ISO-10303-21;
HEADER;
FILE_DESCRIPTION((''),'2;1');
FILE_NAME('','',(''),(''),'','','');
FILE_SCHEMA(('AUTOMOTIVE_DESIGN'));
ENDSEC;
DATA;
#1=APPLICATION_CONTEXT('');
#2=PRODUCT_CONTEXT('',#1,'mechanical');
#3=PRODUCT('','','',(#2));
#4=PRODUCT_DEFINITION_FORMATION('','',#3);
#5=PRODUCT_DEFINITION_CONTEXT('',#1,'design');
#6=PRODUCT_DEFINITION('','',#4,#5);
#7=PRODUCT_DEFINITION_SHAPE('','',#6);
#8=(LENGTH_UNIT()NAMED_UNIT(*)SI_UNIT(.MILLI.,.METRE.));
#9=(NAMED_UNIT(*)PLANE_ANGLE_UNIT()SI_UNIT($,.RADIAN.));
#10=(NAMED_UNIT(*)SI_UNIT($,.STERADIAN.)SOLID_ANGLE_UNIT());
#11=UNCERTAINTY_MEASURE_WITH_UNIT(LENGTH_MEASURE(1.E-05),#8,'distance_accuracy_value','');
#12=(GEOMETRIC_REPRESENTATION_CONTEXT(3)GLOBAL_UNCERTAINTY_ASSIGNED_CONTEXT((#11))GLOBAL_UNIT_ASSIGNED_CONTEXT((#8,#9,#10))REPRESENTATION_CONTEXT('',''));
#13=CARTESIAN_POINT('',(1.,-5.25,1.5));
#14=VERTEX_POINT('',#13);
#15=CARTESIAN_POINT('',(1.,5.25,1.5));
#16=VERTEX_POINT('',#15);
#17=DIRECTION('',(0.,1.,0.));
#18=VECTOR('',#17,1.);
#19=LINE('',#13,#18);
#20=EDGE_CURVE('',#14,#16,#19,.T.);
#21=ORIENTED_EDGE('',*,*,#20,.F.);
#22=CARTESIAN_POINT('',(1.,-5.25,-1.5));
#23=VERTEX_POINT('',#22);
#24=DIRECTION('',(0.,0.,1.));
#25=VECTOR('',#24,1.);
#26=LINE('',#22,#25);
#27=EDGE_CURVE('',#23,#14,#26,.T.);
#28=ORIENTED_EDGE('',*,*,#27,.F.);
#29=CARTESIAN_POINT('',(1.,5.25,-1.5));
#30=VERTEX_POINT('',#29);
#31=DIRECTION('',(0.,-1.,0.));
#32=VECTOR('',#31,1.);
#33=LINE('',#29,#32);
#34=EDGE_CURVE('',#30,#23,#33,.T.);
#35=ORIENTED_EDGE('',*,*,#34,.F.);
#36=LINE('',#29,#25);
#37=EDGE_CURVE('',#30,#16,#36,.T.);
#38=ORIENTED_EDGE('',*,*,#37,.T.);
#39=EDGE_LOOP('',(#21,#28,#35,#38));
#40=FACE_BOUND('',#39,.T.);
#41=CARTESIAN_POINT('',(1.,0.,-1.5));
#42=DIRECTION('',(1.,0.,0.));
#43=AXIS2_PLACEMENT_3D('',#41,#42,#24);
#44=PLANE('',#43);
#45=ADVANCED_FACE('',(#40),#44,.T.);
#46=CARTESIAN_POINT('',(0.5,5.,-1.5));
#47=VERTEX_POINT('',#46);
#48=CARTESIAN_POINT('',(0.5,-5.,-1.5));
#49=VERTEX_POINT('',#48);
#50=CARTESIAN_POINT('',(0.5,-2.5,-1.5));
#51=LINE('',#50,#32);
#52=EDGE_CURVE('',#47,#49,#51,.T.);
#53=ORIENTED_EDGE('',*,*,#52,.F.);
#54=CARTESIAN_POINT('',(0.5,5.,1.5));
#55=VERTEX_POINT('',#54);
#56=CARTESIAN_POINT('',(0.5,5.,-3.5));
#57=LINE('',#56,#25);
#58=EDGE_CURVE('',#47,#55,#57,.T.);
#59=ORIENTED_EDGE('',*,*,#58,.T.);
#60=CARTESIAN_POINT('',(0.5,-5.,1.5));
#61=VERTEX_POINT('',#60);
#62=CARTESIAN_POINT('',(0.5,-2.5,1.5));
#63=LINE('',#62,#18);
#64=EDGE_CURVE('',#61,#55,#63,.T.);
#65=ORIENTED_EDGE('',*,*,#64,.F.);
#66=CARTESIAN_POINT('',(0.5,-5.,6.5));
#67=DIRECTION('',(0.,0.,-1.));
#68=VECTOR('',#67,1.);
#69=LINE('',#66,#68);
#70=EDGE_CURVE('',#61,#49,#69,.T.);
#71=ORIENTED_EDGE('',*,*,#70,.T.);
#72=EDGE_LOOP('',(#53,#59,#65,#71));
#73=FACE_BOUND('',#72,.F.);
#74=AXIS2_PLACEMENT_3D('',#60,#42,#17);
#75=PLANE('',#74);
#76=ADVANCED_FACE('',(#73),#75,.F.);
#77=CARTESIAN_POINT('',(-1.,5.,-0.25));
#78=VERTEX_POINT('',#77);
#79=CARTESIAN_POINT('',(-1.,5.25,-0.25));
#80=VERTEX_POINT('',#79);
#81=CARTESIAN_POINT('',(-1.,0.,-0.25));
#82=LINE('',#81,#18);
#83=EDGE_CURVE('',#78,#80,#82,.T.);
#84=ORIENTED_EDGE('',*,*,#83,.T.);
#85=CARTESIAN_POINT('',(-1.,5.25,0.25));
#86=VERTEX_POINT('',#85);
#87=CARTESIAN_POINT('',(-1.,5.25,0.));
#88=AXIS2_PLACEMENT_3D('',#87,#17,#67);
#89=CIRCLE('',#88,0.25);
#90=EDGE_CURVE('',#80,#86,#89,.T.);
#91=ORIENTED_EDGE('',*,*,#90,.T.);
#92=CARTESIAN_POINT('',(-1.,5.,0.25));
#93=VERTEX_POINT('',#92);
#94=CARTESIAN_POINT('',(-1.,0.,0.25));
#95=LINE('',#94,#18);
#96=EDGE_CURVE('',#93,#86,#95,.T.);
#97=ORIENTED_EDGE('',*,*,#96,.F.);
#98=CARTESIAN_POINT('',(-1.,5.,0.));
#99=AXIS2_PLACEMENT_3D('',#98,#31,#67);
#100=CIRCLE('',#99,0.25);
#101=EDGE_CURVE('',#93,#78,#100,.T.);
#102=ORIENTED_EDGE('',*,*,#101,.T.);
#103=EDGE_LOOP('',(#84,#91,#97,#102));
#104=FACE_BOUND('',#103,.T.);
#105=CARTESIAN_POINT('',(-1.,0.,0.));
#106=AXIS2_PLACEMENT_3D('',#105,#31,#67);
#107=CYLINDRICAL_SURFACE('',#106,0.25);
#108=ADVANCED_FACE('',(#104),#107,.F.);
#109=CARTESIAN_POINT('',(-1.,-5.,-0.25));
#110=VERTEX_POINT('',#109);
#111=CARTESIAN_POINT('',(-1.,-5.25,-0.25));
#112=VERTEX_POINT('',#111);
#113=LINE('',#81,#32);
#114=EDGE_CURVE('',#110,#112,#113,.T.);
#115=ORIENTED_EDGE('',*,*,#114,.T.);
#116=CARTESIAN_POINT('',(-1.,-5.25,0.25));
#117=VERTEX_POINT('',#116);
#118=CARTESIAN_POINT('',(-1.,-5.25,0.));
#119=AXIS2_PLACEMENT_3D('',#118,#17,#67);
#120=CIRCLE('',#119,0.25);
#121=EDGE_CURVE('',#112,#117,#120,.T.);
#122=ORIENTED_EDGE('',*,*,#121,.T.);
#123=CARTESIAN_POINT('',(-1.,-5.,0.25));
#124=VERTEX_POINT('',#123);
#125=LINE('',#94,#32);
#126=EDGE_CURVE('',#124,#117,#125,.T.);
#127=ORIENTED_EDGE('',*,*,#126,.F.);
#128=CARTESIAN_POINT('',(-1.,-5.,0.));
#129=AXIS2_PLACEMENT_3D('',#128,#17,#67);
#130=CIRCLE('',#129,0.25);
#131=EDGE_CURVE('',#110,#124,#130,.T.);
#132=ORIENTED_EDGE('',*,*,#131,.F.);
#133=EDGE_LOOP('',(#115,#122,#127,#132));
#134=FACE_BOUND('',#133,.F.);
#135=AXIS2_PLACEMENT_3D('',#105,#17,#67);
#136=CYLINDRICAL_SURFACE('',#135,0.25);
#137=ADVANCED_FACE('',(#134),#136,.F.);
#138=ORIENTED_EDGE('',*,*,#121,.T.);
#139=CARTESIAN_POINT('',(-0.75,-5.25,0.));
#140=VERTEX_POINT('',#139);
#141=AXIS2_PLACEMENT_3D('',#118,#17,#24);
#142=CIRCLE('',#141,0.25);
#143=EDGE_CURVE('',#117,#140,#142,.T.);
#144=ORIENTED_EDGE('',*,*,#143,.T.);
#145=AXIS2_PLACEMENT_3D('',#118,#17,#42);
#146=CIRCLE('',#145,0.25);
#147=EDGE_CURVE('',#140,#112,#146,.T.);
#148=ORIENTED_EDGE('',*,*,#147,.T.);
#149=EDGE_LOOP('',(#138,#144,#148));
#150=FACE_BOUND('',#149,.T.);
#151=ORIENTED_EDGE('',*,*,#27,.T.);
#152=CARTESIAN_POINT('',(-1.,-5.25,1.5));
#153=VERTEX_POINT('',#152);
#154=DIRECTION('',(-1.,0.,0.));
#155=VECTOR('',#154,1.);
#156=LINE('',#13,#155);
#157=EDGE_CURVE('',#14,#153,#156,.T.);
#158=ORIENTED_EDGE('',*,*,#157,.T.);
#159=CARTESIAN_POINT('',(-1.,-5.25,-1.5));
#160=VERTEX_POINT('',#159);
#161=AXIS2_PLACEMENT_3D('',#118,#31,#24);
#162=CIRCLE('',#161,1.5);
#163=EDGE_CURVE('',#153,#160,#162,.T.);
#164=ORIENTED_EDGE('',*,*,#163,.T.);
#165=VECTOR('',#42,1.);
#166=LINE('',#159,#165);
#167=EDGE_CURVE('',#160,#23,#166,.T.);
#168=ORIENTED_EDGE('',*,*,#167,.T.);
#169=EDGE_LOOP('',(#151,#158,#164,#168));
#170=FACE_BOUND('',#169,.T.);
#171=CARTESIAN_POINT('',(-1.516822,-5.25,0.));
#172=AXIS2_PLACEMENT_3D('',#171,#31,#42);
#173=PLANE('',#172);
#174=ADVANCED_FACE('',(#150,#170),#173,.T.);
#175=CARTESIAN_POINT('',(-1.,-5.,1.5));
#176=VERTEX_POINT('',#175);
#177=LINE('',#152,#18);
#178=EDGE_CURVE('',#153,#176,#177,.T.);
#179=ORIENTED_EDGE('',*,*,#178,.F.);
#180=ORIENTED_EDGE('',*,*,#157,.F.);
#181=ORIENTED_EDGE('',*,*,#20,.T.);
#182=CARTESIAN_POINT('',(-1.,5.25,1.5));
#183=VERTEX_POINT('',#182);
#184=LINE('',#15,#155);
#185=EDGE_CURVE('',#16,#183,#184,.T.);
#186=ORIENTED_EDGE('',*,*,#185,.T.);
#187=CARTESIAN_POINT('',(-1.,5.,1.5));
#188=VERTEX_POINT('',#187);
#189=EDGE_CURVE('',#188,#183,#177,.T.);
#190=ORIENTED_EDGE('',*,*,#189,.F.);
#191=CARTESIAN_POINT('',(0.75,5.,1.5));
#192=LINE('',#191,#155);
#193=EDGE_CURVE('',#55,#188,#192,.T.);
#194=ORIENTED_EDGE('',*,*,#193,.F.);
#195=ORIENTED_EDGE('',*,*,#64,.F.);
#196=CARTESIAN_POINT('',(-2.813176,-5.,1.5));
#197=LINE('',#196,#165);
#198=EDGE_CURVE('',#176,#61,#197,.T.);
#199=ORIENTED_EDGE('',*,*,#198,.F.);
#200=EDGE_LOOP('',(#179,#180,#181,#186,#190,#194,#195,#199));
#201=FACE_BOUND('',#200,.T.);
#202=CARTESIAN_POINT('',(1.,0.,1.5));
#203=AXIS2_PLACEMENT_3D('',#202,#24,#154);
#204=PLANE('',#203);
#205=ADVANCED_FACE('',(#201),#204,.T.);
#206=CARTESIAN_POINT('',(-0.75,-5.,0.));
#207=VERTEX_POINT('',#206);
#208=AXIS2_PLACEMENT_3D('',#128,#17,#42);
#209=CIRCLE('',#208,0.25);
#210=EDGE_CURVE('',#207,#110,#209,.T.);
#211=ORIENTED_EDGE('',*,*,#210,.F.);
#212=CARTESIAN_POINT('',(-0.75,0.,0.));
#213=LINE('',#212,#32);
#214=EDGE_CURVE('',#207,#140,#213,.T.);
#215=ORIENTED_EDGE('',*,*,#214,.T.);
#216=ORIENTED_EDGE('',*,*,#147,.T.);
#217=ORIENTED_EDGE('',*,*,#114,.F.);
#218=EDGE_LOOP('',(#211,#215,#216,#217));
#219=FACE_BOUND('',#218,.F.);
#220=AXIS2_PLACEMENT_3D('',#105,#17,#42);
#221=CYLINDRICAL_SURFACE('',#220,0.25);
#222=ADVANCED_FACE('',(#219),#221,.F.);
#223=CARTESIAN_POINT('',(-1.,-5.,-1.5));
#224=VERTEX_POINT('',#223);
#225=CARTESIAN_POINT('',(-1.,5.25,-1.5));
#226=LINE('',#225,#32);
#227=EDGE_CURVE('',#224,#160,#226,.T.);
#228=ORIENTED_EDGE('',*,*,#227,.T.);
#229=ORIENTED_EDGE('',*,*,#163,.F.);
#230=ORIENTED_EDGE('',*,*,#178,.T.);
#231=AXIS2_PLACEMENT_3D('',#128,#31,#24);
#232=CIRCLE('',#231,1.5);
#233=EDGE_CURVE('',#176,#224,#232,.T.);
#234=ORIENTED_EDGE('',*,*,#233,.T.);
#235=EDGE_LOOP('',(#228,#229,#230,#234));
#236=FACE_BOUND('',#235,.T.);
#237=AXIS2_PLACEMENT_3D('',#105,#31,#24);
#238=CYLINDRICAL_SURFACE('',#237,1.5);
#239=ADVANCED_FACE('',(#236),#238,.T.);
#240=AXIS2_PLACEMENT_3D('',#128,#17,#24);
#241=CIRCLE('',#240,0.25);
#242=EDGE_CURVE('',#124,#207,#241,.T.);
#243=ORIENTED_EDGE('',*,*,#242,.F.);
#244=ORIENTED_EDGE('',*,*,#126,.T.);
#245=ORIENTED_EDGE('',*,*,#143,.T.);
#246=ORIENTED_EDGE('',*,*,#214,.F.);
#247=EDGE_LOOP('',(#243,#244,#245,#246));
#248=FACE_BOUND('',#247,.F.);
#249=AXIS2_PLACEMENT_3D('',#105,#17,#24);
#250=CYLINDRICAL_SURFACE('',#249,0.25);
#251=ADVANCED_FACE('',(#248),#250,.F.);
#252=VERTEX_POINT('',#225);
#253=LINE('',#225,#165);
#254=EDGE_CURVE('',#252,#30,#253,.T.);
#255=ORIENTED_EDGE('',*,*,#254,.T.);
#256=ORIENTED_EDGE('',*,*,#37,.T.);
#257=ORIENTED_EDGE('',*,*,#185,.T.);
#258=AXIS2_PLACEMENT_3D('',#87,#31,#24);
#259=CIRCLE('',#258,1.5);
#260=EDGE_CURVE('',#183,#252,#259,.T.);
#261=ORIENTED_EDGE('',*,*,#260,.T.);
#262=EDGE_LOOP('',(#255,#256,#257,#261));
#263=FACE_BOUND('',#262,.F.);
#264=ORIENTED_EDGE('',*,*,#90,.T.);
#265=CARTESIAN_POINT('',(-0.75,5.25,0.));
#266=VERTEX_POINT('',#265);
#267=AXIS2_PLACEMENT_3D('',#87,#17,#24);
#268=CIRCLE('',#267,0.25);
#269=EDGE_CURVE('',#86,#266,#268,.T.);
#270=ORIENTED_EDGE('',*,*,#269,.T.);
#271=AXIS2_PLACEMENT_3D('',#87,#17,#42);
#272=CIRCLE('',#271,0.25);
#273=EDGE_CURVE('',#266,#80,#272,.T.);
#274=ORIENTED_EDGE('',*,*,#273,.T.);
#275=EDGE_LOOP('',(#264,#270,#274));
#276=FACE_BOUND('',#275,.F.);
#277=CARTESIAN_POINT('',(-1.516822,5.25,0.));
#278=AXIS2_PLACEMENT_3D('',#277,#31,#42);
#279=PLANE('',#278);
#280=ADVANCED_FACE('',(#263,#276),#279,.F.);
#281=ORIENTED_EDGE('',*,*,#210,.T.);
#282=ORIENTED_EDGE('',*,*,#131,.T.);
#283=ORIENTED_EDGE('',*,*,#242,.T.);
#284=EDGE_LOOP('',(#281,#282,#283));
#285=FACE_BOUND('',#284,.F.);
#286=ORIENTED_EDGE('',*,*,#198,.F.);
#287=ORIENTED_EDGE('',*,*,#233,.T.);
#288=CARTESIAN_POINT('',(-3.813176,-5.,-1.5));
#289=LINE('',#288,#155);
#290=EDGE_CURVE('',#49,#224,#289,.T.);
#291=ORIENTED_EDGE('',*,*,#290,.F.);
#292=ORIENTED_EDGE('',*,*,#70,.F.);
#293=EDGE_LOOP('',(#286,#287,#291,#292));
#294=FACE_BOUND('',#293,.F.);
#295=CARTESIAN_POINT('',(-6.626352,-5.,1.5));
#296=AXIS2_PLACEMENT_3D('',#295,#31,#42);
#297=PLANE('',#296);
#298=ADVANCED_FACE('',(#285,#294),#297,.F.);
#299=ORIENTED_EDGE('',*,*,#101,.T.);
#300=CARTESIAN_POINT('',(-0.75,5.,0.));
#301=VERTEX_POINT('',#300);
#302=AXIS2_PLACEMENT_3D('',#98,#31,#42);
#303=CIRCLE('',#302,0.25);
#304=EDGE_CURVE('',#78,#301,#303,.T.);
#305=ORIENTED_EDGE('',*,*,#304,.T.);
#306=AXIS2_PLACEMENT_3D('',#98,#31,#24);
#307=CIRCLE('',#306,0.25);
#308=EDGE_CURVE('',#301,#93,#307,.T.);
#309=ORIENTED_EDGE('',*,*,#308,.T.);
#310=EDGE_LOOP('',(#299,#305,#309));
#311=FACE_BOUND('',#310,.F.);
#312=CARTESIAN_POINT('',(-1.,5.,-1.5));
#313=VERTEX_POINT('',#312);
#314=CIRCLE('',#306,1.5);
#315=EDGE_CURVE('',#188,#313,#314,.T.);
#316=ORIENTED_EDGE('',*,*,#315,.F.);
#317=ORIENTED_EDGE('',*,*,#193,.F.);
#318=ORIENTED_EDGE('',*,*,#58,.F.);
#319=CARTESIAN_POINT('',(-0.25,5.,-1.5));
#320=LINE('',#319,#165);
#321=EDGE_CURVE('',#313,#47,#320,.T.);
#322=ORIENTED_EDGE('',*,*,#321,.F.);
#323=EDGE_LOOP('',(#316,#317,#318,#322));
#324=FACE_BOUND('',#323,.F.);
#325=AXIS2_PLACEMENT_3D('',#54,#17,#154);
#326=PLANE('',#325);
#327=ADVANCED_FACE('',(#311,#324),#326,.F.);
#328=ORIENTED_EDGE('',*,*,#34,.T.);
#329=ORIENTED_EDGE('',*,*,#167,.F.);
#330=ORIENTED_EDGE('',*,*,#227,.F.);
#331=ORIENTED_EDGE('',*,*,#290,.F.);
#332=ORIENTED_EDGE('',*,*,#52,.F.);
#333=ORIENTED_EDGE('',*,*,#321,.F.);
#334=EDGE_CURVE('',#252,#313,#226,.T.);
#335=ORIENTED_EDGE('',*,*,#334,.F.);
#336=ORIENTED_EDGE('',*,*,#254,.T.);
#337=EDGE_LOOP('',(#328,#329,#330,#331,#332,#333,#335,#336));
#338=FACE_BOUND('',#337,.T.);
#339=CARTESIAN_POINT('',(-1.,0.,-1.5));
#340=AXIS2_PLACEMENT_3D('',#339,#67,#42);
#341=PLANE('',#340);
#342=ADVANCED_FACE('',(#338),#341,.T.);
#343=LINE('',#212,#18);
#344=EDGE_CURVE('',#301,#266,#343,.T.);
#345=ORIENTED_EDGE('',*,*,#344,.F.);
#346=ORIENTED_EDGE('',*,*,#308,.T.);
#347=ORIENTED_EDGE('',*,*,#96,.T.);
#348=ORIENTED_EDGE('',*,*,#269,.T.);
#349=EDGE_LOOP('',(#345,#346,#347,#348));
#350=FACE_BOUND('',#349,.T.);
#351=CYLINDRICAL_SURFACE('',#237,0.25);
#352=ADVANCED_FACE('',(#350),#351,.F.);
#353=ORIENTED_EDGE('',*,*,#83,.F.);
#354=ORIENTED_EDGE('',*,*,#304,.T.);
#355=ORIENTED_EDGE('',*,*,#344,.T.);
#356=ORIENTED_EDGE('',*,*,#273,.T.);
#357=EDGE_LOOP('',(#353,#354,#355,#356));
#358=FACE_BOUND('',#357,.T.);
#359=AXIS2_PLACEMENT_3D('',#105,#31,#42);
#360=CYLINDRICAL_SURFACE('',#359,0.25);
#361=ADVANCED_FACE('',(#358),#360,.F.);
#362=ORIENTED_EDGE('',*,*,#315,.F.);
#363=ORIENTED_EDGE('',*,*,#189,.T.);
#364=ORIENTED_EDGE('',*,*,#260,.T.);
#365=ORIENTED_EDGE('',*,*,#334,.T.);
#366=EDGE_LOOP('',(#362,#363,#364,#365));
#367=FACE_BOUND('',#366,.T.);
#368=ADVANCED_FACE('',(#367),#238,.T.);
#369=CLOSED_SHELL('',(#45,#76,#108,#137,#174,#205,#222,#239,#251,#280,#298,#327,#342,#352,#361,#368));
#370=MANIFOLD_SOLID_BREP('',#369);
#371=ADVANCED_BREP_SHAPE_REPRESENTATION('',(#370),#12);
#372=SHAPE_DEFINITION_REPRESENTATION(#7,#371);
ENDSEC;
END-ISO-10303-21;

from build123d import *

# Parameters (mm, degrees)
F1_DEPTH = 5.25
F3_DEPTH = 5


# Not quite as in the source:
# - a feature names something its author has since deleted; it is built from what else it names


with BuildPart() as f1:
    # F0 (on Front) → F1 (new body, symmetric)
    with BuildSketch(Plane.XZ):
        with BuildLine():
            Line((-1, 0.25), (-1, 1.5))
            ThreePointArc((-1, 1.5), (-2.5, 0), (-1, -1.5))
            Line((-1, -1.5), (-1, -0.25))
            ThreePointArc((-1, -0.25), (-1.25, 0), (-1, 0.25))
        make_face()
        with BuildLine():
            ThreePointArc((0.5, 0), (0.0606601718, 1.0606601718), (-1, 1.5))
            Line((-1, 1.5), (-1, 0.25))
            ThreePointArc((-1, 0.25), (-0.8232233047, 0.1767766953), (-0.75, 0))
            ThreePointArc((-0.75, 0), (-0.8232233047, -0.1767766953), (-1, -0.25))
            Line((-1, -0.25), (-1, -1.5))
            ThreePointArc((-1, -1.5), (0.0606601718, -1.0606601718), (0.5, 0))
        make_face()
        with BuildLine():
            Line((1, 1.5), (-1, 1.5))
            ThreePointArc((-1, 1.5), (0.0606601718, 1.0606601718), (0.5, 0))
            ThreePointArc((0.5, 0), (0.0606601718, -1.0606601718), (-1, -1.5))
            Line((-1, -1.5), (1, -1.5))
            Line((1, -1.5), (1, 1.5))
        make_face()
    extrude(amount=F1_DEPTH, both=True)

    # F2 (on face) → F3 (cut, symmetric)
    with BuildSketch(Plane.XY.offset(1.5)):
        Polygon((-1, -4.9999998882), (0.5, -4.9999998882), (0.5, 4.9999998882), (-1, 4.9999998882), (-6.6263522021, 4.9999998882), (-6.6263522021, -4.9999998882), align=None)
    extrude(amount=F3_DEPTH, both=True, mode=Mode.SUBTRACT)


solid = f1.part
